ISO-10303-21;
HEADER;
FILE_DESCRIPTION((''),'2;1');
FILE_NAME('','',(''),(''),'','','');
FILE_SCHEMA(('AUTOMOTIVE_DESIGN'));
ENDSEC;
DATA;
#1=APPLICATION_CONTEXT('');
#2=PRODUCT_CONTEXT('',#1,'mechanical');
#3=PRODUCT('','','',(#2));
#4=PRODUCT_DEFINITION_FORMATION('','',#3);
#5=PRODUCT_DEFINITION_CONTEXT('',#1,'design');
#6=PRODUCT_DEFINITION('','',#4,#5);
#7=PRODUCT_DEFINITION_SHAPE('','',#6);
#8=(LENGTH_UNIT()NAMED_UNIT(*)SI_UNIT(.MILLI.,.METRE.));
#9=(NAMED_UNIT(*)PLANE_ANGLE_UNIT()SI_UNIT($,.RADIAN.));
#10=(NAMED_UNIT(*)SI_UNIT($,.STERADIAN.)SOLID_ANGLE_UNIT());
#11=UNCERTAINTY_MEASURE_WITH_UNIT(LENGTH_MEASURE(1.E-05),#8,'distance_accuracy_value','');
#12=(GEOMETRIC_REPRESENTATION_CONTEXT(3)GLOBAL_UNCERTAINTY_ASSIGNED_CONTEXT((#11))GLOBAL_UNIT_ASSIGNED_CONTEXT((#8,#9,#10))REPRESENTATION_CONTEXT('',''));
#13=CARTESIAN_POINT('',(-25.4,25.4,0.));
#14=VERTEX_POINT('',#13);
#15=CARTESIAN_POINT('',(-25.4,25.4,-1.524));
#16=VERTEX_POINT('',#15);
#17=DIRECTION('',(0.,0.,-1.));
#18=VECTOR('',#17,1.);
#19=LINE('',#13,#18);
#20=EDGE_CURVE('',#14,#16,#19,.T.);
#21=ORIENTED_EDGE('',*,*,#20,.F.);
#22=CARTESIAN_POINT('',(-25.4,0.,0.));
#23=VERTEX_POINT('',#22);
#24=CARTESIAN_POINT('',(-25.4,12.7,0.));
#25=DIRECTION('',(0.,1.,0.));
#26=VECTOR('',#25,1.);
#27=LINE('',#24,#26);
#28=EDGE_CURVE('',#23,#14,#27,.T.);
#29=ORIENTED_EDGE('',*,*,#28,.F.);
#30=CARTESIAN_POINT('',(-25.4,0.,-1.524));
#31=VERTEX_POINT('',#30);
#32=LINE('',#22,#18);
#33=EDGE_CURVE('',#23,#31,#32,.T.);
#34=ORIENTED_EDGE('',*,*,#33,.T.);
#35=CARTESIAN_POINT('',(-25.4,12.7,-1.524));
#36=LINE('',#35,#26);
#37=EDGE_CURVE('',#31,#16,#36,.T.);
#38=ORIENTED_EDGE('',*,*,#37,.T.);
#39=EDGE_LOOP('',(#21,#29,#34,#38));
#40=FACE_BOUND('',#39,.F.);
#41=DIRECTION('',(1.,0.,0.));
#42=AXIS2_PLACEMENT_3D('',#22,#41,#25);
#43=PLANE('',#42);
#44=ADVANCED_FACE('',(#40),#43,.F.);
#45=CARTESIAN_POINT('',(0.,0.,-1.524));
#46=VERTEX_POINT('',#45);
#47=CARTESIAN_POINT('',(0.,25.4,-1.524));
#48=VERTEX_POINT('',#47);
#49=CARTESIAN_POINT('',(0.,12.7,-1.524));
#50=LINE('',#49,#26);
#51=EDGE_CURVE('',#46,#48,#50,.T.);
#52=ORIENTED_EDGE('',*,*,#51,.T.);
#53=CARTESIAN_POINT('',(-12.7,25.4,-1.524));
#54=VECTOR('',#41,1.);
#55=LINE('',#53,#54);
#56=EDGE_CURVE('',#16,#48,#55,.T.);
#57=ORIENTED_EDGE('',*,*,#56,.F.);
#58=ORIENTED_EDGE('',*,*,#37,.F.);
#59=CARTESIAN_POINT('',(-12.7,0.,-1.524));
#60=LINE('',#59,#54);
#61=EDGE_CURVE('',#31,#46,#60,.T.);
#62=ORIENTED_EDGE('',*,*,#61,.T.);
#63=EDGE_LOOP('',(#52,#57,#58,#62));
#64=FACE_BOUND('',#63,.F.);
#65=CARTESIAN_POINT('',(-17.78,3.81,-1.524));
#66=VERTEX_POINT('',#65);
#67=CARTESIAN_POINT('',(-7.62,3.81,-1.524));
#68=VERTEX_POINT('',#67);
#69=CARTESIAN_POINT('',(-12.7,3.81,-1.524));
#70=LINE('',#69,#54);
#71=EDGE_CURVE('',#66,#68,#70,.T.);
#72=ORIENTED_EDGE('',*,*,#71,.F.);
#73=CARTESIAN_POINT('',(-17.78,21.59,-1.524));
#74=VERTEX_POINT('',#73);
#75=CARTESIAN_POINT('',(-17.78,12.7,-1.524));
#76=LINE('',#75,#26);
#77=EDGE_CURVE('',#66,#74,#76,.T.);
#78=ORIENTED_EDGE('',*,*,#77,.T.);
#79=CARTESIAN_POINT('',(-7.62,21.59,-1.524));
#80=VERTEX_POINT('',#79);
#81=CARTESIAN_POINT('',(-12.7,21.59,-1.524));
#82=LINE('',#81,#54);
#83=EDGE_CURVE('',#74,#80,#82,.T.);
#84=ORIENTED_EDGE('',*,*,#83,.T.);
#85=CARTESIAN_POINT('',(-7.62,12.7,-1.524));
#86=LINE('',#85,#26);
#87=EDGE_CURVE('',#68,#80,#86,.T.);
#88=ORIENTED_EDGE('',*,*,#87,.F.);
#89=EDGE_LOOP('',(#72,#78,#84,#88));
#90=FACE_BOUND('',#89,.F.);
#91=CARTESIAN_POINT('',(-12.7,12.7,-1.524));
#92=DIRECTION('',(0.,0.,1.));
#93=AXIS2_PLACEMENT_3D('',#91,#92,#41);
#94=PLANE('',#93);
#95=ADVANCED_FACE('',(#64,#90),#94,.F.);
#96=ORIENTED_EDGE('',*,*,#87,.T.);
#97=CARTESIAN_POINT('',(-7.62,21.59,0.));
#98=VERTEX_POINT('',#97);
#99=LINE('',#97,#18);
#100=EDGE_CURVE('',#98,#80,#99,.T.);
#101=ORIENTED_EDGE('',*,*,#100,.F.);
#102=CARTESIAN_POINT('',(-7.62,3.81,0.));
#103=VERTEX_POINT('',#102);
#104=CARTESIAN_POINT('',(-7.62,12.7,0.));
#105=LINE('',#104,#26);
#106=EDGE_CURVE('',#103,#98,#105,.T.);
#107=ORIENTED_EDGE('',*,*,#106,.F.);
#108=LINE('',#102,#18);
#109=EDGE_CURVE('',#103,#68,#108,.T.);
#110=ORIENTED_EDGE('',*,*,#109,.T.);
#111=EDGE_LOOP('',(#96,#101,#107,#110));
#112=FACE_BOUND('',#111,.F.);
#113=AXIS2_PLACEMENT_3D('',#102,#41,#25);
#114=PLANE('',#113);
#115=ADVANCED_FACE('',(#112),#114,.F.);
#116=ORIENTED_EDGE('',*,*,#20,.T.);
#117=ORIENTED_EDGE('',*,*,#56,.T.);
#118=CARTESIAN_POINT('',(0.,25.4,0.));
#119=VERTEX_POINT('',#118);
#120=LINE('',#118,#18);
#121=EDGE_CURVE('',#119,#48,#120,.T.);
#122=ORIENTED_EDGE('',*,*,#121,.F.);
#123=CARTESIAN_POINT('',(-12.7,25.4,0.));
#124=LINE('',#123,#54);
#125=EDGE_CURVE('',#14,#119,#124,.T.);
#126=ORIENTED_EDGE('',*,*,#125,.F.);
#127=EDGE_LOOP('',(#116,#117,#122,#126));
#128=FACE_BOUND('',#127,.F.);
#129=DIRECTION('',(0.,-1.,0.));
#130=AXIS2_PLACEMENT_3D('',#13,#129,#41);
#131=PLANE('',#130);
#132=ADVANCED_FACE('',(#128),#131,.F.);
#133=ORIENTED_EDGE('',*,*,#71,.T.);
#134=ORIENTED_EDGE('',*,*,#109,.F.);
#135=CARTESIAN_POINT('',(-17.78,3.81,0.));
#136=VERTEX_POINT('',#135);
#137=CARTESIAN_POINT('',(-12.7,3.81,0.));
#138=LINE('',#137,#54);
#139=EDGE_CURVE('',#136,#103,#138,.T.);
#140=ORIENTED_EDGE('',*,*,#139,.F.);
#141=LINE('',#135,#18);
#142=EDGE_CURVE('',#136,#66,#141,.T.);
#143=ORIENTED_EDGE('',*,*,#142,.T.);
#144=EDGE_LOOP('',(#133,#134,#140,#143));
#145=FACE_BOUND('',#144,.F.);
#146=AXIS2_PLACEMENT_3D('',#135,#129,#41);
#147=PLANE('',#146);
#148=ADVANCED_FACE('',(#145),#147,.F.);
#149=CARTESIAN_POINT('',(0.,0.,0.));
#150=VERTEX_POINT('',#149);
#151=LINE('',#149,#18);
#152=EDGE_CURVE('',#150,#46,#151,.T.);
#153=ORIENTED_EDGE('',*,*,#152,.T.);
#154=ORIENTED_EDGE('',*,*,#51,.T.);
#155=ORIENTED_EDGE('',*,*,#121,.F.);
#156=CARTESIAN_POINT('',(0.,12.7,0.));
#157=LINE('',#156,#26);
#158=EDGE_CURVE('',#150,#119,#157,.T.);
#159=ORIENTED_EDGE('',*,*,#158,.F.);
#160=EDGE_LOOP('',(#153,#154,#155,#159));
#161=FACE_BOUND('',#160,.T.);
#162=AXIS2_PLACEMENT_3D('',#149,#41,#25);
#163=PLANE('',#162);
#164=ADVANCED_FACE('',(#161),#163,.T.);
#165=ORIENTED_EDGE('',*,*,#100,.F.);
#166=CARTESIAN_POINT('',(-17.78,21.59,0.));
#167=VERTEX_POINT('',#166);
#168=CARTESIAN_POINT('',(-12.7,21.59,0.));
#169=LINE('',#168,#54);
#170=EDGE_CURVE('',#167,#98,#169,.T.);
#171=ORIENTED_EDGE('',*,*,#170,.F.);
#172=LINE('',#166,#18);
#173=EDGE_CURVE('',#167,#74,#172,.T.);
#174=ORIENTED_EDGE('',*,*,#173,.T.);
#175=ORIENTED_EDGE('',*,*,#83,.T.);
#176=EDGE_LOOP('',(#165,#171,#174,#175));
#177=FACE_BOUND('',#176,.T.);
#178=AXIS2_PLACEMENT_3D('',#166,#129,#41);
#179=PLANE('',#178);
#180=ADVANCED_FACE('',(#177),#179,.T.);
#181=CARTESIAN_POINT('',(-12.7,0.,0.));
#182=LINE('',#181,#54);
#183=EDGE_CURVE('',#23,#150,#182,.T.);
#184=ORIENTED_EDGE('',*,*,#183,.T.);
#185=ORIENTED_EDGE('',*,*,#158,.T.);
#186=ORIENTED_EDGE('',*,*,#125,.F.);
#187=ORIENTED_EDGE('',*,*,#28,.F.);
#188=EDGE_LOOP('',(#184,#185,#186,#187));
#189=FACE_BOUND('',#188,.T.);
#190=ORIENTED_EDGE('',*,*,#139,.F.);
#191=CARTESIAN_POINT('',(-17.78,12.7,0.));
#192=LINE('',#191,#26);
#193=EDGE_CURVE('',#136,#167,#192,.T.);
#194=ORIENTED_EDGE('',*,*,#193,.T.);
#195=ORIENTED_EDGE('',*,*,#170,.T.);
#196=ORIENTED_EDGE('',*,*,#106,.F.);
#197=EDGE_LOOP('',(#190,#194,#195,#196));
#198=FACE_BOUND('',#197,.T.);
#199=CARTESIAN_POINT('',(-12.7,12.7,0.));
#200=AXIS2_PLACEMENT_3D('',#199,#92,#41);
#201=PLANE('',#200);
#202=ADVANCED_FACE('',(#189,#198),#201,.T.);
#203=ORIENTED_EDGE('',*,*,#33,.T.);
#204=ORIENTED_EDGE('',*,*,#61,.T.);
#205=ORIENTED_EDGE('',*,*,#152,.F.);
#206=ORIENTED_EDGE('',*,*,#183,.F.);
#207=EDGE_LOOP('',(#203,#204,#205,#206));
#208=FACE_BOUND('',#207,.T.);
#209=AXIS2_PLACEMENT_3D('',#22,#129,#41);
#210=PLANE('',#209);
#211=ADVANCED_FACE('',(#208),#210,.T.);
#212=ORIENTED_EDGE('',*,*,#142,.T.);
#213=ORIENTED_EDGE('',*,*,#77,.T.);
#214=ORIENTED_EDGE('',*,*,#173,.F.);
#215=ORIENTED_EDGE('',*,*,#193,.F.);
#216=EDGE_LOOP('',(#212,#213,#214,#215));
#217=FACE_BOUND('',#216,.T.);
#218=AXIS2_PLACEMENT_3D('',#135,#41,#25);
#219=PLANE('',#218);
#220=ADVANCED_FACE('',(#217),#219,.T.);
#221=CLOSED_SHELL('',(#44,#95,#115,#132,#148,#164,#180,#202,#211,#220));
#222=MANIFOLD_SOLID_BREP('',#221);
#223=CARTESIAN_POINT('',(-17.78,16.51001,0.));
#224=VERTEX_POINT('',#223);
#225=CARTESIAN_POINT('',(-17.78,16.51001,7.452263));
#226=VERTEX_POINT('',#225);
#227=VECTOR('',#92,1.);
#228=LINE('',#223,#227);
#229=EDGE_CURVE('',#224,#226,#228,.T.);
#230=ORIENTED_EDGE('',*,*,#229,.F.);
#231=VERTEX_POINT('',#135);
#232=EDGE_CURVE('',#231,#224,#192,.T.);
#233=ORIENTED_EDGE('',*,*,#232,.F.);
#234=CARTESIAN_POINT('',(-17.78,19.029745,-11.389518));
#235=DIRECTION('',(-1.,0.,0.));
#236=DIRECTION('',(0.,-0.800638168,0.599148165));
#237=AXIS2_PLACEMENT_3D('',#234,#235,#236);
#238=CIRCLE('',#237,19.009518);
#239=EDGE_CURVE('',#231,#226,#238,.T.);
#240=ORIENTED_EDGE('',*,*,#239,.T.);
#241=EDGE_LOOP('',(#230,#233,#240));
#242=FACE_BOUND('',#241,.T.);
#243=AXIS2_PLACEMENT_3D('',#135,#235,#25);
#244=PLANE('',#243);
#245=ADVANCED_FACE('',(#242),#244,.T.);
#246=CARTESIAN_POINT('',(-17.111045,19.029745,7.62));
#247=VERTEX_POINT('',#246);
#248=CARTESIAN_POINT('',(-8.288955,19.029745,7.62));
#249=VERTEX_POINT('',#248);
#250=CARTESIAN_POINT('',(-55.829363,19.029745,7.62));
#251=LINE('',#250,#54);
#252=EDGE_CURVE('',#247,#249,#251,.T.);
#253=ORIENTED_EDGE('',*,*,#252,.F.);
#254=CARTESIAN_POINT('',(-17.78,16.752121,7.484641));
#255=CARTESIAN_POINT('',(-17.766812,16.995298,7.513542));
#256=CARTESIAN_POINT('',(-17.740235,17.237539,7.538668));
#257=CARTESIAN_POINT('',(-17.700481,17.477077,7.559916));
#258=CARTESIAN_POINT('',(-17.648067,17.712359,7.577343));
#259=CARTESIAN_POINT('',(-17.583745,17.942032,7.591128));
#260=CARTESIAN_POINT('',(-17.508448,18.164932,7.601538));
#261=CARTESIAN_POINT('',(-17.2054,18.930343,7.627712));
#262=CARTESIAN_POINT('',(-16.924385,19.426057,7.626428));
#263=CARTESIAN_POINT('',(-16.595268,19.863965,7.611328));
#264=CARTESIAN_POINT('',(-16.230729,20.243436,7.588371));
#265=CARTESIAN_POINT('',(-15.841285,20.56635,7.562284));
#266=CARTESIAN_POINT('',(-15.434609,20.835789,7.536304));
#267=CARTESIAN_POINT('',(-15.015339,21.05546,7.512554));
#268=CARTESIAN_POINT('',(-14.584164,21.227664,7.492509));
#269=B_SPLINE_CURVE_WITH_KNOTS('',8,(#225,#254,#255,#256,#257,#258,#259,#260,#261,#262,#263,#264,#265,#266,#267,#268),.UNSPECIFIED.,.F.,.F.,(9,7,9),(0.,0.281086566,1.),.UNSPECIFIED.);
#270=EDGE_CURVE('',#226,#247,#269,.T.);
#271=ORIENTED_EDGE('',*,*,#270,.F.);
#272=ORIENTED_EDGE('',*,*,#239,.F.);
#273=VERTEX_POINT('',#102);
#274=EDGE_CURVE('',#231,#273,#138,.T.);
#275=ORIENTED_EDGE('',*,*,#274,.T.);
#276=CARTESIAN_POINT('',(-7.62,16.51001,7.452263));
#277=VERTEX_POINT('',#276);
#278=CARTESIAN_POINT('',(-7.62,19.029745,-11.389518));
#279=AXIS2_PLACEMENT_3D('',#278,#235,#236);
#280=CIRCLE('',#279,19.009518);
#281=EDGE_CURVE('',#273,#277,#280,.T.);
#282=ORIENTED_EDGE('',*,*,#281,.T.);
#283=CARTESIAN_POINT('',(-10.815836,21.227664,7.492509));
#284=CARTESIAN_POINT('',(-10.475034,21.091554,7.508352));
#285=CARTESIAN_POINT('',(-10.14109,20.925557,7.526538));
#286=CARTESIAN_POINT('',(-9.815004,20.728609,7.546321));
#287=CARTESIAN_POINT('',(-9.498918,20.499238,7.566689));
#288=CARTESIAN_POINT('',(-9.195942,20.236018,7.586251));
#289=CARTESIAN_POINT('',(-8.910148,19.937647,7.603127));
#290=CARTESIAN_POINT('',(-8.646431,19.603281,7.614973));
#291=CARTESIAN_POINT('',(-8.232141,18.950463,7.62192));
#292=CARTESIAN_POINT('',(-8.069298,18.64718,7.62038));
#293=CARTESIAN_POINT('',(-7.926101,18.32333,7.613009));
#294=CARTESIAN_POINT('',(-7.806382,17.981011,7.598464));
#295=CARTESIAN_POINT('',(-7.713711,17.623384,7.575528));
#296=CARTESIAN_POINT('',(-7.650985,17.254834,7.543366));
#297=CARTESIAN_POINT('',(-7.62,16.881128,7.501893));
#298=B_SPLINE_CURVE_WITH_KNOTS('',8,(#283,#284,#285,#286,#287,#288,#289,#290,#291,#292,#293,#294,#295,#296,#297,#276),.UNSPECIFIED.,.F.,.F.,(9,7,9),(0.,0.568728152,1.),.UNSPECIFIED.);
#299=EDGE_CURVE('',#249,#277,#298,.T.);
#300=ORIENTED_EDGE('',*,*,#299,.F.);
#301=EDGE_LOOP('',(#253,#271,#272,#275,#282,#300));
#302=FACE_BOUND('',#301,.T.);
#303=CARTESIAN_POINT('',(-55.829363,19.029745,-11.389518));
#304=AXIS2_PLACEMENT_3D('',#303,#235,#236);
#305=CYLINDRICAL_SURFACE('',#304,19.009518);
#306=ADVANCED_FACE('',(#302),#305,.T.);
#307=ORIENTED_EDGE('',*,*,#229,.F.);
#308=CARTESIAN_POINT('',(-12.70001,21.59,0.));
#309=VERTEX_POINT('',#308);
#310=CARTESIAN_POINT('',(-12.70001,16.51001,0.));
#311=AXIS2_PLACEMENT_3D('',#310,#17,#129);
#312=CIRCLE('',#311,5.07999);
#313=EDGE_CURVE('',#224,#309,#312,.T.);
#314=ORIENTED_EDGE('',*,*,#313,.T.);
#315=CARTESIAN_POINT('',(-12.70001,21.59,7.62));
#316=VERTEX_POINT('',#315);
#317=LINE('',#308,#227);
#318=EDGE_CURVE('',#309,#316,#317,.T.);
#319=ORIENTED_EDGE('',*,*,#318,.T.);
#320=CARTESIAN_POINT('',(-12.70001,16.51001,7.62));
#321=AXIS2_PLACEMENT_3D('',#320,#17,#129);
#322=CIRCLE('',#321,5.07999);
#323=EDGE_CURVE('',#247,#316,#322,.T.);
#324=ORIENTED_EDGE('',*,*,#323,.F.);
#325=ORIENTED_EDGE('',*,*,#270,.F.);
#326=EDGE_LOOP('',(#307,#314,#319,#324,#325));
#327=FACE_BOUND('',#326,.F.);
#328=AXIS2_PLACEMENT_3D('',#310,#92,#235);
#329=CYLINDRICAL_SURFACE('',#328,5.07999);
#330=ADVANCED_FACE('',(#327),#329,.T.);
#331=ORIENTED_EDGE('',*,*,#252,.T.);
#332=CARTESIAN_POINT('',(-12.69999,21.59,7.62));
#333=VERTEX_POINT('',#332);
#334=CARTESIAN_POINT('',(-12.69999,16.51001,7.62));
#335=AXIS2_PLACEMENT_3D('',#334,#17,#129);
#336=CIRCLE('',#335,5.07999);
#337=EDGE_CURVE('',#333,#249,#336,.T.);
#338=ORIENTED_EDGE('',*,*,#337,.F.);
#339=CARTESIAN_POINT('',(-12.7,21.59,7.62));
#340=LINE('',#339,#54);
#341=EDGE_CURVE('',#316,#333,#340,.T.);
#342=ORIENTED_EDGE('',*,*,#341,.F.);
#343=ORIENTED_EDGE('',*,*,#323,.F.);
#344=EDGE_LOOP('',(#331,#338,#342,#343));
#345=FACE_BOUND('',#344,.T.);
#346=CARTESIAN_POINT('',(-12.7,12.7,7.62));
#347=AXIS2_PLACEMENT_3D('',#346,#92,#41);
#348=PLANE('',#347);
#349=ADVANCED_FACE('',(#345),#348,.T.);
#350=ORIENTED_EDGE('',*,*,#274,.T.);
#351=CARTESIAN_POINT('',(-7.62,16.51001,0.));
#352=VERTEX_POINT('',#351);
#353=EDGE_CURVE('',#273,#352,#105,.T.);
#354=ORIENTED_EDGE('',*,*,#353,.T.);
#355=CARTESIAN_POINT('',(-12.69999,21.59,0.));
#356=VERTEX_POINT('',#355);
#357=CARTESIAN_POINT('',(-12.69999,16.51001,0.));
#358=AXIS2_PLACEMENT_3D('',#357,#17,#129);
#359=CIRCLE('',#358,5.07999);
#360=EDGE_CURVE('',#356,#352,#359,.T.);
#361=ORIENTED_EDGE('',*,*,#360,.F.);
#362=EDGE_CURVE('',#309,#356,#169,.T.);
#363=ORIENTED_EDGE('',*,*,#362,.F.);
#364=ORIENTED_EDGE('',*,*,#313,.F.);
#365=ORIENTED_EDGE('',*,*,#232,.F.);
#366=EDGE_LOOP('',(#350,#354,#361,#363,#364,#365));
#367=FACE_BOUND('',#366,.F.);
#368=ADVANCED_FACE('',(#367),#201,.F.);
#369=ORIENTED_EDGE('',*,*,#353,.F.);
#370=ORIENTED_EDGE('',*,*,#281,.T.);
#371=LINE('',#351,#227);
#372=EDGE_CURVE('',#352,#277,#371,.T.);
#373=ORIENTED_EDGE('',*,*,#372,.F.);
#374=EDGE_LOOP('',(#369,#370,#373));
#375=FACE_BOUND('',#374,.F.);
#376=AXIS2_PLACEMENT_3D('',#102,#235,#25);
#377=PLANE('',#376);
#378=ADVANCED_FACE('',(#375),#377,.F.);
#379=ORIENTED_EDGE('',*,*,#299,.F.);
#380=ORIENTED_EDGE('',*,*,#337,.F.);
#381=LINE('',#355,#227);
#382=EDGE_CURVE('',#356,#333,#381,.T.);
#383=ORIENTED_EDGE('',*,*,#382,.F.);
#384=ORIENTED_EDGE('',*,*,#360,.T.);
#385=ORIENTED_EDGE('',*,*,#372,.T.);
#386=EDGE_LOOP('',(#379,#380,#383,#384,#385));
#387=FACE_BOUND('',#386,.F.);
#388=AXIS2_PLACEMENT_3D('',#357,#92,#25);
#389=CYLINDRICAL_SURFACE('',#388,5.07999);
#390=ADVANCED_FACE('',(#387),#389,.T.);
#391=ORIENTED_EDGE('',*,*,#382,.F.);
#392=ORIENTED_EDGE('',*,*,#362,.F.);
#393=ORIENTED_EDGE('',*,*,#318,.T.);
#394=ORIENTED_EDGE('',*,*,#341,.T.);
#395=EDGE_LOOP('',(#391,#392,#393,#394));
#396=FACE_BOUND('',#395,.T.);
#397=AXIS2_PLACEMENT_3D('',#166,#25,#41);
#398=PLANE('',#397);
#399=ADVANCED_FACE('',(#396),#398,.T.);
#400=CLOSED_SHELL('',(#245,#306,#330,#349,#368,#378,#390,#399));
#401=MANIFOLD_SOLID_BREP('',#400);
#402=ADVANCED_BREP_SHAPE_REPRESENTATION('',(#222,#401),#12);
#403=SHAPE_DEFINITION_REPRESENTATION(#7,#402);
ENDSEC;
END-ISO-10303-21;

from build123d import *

# Parameters (mm, degrees)
F0_W        = 10.16
F0_H        = 17.78
F1_DEPTH    = 7.62
F2_T1_DEPTH = 86.2587266768
F3_R        = 5.07999
F0_W_2      = 25.4
F0_H_2      = 25.4
F4_DEPTH    = 1.524


# Not quite as in the source:
# - a fillet or chamfer that OpenCascade refuses, or shapes differently, is made with other operations: its cross-section is extruded or revolved along the edge and cut away or added
# - a fillet or chamfer is up to 0.001 mm smaller than in the source, because OpenCascade refuses the exact size


with BuildPart() as f1:
    # F0 (on Top) → F1 (new body)
    with BuildSketch(Plane.XY):
        with Locations((-12.7, 12.7)):
            Rectangle(F0_W, F0_H)
    extrude(amount=F1_DEPTH)

    # F2: fillet of radius 19.0095175901 on 1 edges, made by hand

    # F2_s2 → F2_t1 (cut)
    with BuildSketch(Plane.YZ.offset(-55.8293633384)):
        with BuildLine():
            ThreePointArc((3.81, 0), (10.5193832973, 5.6085851567), (19.0297453354, 7.62))
            Line((19.0297453354, 7.62), (3.81, 7.62))
            Line((3.81, 7.62), (3.81, 0))
        make_face()
    extrude(amount=F2_T1_DEPTH, mode=Mode.SUBTRACT)

    # F3 (radius 5.08 in the source; OpenCascade refuses exactly that, so slightly less here)
    f3_edges = [f1.edges().sort_by_distance(p)[0] for p in [
        (-17.78, 21.59, 3.81),
        (-7.62, 21.59, 3.81),
    ]]
    fillet(f3_edges, radius=F3_R)


with BuildPart() as f4:
    # F0 (on Top) → F4 (new body)
    with BuildSketch(Plane.XY):
        with Locations((-12.7, 12.7)):
            Rectangle(F0_W_2, F0_H_2)
        with Locations((-12.7, 12.7)):
            Rectangle(F0_W, F0_H, mode=Mode.SUBTRACT)
    extrude(amount=-F4_DEPTH)


solid = Compound([f1.part, f4.part])
